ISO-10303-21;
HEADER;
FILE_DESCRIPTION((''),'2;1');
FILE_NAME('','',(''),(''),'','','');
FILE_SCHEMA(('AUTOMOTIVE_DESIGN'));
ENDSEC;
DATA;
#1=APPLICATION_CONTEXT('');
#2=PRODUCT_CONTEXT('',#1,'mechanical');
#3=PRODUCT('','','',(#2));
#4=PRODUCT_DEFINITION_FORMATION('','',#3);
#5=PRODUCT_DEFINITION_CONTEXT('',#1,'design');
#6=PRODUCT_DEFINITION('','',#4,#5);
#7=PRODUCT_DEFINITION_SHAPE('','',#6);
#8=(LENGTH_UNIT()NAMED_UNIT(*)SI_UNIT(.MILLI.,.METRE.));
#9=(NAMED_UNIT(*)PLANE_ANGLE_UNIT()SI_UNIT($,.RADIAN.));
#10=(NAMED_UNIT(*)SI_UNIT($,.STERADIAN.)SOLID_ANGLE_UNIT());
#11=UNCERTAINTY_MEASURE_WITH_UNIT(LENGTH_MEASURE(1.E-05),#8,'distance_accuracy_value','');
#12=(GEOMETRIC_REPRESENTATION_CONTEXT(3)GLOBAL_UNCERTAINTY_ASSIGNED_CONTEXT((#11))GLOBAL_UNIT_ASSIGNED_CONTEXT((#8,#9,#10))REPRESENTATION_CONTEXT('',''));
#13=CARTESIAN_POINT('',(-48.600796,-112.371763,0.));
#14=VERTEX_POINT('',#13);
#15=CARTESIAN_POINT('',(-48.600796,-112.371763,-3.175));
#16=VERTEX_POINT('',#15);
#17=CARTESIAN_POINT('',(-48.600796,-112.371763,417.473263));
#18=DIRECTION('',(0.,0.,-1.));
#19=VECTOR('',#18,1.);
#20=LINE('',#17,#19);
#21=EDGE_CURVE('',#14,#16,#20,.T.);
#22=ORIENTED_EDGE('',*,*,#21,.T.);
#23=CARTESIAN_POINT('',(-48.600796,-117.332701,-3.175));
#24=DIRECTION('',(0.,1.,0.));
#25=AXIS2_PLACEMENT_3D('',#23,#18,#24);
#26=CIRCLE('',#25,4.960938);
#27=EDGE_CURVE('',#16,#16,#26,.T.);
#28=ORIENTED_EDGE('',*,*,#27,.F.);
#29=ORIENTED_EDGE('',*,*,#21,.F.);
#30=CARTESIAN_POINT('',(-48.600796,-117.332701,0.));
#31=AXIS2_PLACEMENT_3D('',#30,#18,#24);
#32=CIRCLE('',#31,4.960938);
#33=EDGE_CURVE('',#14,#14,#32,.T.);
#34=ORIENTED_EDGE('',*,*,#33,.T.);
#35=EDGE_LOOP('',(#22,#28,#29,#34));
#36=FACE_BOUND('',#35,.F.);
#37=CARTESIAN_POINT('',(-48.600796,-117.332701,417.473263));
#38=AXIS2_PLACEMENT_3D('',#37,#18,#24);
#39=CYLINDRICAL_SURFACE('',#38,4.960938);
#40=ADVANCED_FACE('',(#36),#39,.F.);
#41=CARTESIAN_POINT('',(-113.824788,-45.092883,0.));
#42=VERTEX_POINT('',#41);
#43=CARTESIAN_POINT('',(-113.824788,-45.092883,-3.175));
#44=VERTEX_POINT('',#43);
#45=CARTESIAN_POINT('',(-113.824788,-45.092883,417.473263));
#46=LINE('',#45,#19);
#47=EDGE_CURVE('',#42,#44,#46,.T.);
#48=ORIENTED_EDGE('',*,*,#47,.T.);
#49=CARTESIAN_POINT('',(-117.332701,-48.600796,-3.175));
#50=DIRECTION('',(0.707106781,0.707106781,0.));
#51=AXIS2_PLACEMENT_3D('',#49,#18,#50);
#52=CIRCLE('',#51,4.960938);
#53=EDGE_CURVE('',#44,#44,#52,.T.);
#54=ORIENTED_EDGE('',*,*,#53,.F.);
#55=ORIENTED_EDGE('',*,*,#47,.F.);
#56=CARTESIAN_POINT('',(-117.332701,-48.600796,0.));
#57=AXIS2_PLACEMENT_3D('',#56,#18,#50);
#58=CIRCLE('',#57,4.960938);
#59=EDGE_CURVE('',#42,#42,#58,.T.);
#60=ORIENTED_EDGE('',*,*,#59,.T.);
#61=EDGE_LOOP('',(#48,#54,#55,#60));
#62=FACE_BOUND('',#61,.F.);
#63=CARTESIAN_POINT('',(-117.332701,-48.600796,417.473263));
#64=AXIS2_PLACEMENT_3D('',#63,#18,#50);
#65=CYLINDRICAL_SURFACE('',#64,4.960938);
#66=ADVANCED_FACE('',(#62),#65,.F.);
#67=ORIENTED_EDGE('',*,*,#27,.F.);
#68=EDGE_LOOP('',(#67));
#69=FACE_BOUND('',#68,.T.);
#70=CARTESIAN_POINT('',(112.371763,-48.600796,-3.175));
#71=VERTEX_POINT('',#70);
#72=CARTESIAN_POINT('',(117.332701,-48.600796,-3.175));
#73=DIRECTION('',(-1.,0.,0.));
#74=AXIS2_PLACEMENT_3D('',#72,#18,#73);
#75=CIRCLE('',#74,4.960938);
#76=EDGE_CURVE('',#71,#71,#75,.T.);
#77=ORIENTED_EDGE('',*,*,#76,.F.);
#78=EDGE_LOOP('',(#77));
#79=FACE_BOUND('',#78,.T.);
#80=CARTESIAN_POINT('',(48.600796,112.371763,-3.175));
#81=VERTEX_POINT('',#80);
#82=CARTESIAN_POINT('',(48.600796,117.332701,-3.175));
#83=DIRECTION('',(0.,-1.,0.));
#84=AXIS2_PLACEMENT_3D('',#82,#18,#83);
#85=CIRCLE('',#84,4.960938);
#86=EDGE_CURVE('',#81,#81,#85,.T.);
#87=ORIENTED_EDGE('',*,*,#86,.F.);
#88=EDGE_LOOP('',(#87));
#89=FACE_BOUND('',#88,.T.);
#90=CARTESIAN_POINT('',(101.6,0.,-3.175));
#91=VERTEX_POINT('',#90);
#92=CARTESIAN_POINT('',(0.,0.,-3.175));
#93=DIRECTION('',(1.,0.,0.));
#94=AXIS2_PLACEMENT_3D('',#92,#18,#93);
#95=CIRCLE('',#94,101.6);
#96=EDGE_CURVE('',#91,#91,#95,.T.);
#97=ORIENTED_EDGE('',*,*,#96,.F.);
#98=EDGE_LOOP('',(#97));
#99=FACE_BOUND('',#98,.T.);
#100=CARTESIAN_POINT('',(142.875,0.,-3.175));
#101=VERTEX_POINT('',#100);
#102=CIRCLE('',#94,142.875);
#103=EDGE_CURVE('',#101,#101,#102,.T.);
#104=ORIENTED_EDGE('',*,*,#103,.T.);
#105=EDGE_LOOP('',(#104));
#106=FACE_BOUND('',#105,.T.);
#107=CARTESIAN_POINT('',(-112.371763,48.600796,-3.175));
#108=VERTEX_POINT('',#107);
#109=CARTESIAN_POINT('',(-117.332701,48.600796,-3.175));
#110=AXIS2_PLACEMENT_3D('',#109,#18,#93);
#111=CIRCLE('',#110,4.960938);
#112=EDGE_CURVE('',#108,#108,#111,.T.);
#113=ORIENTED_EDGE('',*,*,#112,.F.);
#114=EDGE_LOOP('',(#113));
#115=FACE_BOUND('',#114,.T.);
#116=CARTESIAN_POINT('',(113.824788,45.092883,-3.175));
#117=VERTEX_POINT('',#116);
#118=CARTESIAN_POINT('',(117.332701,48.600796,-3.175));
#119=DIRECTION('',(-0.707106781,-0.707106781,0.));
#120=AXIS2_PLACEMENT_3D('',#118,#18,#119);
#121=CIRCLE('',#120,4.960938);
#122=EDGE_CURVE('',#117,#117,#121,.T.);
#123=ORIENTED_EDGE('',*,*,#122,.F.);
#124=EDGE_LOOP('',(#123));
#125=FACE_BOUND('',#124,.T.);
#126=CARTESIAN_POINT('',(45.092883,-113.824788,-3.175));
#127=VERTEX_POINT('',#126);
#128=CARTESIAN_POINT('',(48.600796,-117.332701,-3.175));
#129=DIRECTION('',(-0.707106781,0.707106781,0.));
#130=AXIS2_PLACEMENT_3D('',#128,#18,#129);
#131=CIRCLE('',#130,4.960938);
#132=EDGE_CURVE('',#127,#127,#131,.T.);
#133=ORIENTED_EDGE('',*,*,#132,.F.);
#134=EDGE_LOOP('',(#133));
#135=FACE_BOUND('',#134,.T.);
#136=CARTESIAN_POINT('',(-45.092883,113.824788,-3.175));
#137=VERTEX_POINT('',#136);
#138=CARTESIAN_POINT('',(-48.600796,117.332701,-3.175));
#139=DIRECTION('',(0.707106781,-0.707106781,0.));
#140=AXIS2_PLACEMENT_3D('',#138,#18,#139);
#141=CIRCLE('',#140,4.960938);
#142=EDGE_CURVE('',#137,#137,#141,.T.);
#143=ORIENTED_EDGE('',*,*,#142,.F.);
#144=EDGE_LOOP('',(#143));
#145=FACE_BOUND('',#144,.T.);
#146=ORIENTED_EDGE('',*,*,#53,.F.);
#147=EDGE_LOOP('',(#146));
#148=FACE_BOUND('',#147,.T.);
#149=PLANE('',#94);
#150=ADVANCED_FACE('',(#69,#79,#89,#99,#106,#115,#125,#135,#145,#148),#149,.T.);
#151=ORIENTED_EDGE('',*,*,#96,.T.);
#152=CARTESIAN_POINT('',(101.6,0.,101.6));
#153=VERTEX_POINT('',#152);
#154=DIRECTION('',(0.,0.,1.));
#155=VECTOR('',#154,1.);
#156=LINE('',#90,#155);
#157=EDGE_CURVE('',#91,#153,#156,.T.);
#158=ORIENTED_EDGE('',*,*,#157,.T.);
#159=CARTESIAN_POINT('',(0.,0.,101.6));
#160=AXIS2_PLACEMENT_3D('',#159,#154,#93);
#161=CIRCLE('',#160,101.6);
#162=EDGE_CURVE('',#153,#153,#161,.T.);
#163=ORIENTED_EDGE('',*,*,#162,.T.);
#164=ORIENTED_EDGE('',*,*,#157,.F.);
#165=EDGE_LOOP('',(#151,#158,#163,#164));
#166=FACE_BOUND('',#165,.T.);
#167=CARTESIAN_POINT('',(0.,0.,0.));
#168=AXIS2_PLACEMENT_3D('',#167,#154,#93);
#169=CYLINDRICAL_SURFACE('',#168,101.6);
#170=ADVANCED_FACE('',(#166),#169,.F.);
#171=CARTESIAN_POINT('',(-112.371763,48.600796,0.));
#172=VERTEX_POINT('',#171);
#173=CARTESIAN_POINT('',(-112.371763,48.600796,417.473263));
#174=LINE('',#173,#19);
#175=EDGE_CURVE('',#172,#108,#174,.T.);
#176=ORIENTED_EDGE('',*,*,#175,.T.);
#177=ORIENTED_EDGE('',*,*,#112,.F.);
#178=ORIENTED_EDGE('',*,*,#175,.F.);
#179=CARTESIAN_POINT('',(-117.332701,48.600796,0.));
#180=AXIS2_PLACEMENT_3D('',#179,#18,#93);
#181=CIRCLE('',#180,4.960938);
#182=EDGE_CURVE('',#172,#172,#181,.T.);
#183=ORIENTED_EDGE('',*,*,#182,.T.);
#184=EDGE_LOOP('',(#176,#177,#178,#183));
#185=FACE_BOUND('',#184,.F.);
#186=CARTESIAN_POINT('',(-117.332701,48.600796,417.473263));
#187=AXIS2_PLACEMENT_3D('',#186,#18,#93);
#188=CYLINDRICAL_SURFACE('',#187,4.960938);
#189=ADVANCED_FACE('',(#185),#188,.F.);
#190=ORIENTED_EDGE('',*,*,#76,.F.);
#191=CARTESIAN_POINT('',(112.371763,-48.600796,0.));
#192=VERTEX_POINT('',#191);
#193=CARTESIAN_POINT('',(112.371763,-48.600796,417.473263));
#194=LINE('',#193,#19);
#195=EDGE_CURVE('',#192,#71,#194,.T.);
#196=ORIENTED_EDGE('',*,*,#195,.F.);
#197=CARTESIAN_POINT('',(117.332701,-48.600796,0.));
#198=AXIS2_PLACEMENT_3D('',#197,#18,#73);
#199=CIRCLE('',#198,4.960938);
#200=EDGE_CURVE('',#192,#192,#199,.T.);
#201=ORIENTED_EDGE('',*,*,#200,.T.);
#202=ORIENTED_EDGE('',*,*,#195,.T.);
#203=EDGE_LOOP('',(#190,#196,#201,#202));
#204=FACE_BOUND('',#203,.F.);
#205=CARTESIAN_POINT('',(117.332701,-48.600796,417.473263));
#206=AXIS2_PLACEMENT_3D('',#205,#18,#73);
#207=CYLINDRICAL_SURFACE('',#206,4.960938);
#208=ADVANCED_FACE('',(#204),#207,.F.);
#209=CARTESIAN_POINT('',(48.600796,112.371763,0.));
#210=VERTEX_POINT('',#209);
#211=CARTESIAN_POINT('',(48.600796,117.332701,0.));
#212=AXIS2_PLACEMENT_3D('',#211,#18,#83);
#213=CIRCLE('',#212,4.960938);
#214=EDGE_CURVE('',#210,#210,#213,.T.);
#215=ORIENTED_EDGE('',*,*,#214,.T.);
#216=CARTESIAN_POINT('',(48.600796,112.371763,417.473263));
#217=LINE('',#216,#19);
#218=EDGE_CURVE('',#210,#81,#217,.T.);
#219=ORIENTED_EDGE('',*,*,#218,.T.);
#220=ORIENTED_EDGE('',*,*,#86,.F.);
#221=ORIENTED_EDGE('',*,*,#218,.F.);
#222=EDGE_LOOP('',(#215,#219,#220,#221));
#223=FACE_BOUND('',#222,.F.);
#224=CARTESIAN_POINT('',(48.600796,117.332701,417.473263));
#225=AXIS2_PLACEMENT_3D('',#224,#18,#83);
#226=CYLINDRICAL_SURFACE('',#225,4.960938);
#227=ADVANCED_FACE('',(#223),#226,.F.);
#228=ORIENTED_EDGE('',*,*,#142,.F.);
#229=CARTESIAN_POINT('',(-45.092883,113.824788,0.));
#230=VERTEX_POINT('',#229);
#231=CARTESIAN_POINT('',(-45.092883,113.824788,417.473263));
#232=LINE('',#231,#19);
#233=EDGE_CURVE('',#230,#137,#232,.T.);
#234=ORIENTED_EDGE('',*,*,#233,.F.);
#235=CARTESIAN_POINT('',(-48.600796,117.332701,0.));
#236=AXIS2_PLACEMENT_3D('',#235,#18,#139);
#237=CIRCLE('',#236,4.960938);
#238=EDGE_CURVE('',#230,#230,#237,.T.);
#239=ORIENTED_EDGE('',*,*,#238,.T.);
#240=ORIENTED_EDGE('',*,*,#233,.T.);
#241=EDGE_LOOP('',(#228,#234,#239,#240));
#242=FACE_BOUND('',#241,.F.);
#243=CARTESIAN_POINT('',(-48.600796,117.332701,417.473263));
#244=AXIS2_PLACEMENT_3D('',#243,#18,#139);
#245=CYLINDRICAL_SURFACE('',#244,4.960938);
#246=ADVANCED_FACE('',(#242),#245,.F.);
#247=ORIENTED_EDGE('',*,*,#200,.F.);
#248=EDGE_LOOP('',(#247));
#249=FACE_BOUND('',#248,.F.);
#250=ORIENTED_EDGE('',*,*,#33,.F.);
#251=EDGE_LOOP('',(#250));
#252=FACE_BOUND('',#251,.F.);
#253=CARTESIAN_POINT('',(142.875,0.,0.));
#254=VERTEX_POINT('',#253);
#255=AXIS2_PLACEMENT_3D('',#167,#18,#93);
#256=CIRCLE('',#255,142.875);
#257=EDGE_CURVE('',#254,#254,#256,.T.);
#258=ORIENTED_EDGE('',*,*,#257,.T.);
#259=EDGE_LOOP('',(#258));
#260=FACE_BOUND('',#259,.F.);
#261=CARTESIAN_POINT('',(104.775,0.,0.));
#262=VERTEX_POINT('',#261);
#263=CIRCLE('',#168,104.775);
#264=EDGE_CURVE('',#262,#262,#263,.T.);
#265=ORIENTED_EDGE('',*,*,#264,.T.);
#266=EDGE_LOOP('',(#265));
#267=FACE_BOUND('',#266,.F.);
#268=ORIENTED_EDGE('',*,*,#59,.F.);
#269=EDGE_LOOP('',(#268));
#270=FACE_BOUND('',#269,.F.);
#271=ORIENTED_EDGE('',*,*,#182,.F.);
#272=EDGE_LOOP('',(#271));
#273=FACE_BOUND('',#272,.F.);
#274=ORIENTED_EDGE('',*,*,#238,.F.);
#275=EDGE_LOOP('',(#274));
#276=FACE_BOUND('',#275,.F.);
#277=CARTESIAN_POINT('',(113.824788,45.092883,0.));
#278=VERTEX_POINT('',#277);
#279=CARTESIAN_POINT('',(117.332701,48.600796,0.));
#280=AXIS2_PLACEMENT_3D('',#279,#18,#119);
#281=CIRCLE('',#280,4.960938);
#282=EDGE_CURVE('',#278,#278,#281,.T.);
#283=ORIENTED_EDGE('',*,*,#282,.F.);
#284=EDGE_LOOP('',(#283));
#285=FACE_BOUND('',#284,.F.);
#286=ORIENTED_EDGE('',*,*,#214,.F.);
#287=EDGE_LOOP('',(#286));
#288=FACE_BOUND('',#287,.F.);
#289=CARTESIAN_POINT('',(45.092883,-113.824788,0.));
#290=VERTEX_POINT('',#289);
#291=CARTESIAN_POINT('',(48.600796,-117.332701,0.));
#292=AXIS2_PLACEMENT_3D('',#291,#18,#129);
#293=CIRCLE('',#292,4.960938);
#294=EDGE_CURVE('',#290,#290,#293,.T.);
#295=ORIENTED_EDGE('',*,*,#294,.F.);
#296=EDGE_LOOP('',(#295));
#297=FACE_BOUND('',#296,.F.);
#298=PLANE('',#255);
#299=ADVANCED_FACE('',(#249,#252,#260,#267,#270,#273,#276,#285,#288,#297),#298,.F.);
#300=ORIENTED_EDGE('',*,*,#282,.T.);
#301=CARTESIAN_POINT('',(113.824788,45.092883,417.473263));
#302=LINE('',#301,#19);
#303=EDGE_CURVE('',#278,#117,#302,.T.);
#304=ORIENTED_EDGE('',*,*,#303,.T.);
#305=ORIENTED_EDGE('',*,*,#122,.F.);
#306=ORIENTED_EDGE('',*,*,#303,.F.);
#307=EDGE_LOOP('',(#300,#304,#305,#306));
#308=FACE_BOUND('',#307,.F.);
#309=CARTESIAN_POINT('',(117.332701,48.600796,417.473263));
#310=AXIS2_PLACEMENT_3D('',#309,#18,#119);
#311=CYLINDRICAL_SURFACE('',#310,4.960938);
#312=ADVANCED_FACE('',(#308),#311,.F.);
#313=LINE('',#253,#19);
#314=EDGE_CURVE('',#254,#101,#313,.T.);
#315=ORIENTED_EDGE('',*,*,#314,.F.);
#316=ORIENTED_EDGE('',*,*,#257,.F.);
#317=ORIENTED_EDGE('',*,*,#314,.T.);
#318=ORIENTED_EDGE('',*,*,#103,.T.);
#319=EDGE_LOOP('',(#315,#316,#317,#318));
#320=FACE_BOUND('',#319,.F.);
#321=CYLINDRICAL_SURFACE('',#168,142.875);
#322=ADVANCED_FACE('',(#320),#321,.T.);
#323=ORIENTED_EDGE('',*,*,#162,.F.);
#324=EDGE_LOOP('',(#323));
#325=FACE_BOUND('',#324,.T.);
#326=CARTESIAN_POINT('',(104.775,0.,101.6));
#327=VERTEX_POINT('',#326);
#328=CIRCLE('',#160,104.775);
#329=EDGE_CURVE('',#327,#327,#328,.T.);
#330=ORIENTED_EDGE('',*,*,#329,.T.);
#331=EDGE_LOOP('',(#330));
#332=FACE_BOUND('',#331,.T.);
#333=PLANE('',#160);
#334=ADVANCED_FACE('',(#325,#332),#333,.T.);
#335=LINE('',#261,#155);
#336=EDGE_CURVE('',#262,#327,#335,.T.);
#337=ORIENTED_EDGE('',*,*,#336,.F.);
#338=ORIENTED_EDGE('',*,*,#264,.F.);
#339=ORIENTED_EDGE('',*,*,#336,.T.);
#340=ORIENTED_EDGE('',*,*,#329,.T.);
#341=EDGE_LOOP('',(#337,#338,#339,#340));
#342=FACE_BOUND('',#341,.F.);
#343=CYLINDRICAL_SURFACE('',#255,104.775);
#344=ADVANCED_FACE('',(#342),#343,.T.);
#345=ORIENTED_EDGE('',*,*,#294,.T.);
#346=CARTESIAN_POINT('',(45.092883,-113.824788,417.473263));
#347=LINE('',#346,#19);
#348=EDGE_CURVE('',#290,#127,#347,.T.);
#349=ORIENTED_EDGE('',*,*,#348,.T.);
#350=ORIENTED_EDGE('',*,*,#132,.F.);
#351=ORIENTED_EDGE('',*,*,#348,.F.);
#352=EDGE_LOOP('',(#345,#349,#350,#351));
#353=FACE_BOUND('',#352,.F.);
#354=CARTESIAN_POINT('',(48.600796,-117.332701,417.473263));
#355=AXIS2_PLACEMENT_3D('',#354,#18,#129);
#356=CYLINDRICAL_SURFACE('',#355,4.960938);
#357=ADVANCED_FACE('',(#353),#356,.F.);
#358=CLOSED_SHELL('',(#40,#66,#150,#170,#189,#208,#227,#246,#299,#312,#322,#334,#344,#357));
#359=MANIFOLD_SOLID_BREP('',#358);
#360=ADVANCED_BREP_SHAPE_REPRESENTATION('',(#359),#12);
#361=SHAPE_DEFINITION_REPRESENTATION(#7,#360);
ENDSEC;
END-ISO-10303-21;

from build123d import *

# Parameters (mm, degrees)
F0_R            = 104.775
F0_R_2          = 101.6
F1_DEPTH        = 101.6
F2_R            = 142.875
F2_R_2          = 101.6
F3_DEPTH        = 3.175
F5_D            = 9.921875
F5_COPIES_COUNT = 8


# Not quite as in the source:
# - a length typed as a fraction of an inch, garbled in the dataset ("3 / 203.2 mm" for 3/8 in), is restored
# - a pattern or mirror of a feature is missing from the dataset's text; its kind, count and spacing are read off the source's solid


with BuildPart() as f1:
    # F0 (on Top) → F1 (new body)
    with BuildSketch(Plane.XY):
        Circle(F0_R)
        Circle(F0_R_2, mode=Mode.SUBTRACT)
    extrude(amount=F1_DEPTH)

    # F2 (on face) → F3 (join)
    with BuildSketch(Plane(origin=(0, 0, 0), x_dir=(1, 0, 0), z_dir=(0, 0, -1))):
        Circle(F2_R)
        Circle(F2_R_2, mode=Mode.SUBTRACT)
    extrude(amount=F3_DEPTH)

    # F5 (through all)
    with Locations(Plane.XY):
        with Locations((117.3327006289, -48.6007959104)):
            f5 = Hole(F5_D / 2)

    # F5_copies: F5 ×8 about axis
    f5_copies_axis = Axis((0, 0, 0), (0, 0, 1))
    for i in range(1, F5_COPIES_COUNT):
        add(f5.rotate(f5_copies_axis, i * 360 / F5_COPIES_COUNT), mode=Mode.SUBTRACT)


solid = f1.part
